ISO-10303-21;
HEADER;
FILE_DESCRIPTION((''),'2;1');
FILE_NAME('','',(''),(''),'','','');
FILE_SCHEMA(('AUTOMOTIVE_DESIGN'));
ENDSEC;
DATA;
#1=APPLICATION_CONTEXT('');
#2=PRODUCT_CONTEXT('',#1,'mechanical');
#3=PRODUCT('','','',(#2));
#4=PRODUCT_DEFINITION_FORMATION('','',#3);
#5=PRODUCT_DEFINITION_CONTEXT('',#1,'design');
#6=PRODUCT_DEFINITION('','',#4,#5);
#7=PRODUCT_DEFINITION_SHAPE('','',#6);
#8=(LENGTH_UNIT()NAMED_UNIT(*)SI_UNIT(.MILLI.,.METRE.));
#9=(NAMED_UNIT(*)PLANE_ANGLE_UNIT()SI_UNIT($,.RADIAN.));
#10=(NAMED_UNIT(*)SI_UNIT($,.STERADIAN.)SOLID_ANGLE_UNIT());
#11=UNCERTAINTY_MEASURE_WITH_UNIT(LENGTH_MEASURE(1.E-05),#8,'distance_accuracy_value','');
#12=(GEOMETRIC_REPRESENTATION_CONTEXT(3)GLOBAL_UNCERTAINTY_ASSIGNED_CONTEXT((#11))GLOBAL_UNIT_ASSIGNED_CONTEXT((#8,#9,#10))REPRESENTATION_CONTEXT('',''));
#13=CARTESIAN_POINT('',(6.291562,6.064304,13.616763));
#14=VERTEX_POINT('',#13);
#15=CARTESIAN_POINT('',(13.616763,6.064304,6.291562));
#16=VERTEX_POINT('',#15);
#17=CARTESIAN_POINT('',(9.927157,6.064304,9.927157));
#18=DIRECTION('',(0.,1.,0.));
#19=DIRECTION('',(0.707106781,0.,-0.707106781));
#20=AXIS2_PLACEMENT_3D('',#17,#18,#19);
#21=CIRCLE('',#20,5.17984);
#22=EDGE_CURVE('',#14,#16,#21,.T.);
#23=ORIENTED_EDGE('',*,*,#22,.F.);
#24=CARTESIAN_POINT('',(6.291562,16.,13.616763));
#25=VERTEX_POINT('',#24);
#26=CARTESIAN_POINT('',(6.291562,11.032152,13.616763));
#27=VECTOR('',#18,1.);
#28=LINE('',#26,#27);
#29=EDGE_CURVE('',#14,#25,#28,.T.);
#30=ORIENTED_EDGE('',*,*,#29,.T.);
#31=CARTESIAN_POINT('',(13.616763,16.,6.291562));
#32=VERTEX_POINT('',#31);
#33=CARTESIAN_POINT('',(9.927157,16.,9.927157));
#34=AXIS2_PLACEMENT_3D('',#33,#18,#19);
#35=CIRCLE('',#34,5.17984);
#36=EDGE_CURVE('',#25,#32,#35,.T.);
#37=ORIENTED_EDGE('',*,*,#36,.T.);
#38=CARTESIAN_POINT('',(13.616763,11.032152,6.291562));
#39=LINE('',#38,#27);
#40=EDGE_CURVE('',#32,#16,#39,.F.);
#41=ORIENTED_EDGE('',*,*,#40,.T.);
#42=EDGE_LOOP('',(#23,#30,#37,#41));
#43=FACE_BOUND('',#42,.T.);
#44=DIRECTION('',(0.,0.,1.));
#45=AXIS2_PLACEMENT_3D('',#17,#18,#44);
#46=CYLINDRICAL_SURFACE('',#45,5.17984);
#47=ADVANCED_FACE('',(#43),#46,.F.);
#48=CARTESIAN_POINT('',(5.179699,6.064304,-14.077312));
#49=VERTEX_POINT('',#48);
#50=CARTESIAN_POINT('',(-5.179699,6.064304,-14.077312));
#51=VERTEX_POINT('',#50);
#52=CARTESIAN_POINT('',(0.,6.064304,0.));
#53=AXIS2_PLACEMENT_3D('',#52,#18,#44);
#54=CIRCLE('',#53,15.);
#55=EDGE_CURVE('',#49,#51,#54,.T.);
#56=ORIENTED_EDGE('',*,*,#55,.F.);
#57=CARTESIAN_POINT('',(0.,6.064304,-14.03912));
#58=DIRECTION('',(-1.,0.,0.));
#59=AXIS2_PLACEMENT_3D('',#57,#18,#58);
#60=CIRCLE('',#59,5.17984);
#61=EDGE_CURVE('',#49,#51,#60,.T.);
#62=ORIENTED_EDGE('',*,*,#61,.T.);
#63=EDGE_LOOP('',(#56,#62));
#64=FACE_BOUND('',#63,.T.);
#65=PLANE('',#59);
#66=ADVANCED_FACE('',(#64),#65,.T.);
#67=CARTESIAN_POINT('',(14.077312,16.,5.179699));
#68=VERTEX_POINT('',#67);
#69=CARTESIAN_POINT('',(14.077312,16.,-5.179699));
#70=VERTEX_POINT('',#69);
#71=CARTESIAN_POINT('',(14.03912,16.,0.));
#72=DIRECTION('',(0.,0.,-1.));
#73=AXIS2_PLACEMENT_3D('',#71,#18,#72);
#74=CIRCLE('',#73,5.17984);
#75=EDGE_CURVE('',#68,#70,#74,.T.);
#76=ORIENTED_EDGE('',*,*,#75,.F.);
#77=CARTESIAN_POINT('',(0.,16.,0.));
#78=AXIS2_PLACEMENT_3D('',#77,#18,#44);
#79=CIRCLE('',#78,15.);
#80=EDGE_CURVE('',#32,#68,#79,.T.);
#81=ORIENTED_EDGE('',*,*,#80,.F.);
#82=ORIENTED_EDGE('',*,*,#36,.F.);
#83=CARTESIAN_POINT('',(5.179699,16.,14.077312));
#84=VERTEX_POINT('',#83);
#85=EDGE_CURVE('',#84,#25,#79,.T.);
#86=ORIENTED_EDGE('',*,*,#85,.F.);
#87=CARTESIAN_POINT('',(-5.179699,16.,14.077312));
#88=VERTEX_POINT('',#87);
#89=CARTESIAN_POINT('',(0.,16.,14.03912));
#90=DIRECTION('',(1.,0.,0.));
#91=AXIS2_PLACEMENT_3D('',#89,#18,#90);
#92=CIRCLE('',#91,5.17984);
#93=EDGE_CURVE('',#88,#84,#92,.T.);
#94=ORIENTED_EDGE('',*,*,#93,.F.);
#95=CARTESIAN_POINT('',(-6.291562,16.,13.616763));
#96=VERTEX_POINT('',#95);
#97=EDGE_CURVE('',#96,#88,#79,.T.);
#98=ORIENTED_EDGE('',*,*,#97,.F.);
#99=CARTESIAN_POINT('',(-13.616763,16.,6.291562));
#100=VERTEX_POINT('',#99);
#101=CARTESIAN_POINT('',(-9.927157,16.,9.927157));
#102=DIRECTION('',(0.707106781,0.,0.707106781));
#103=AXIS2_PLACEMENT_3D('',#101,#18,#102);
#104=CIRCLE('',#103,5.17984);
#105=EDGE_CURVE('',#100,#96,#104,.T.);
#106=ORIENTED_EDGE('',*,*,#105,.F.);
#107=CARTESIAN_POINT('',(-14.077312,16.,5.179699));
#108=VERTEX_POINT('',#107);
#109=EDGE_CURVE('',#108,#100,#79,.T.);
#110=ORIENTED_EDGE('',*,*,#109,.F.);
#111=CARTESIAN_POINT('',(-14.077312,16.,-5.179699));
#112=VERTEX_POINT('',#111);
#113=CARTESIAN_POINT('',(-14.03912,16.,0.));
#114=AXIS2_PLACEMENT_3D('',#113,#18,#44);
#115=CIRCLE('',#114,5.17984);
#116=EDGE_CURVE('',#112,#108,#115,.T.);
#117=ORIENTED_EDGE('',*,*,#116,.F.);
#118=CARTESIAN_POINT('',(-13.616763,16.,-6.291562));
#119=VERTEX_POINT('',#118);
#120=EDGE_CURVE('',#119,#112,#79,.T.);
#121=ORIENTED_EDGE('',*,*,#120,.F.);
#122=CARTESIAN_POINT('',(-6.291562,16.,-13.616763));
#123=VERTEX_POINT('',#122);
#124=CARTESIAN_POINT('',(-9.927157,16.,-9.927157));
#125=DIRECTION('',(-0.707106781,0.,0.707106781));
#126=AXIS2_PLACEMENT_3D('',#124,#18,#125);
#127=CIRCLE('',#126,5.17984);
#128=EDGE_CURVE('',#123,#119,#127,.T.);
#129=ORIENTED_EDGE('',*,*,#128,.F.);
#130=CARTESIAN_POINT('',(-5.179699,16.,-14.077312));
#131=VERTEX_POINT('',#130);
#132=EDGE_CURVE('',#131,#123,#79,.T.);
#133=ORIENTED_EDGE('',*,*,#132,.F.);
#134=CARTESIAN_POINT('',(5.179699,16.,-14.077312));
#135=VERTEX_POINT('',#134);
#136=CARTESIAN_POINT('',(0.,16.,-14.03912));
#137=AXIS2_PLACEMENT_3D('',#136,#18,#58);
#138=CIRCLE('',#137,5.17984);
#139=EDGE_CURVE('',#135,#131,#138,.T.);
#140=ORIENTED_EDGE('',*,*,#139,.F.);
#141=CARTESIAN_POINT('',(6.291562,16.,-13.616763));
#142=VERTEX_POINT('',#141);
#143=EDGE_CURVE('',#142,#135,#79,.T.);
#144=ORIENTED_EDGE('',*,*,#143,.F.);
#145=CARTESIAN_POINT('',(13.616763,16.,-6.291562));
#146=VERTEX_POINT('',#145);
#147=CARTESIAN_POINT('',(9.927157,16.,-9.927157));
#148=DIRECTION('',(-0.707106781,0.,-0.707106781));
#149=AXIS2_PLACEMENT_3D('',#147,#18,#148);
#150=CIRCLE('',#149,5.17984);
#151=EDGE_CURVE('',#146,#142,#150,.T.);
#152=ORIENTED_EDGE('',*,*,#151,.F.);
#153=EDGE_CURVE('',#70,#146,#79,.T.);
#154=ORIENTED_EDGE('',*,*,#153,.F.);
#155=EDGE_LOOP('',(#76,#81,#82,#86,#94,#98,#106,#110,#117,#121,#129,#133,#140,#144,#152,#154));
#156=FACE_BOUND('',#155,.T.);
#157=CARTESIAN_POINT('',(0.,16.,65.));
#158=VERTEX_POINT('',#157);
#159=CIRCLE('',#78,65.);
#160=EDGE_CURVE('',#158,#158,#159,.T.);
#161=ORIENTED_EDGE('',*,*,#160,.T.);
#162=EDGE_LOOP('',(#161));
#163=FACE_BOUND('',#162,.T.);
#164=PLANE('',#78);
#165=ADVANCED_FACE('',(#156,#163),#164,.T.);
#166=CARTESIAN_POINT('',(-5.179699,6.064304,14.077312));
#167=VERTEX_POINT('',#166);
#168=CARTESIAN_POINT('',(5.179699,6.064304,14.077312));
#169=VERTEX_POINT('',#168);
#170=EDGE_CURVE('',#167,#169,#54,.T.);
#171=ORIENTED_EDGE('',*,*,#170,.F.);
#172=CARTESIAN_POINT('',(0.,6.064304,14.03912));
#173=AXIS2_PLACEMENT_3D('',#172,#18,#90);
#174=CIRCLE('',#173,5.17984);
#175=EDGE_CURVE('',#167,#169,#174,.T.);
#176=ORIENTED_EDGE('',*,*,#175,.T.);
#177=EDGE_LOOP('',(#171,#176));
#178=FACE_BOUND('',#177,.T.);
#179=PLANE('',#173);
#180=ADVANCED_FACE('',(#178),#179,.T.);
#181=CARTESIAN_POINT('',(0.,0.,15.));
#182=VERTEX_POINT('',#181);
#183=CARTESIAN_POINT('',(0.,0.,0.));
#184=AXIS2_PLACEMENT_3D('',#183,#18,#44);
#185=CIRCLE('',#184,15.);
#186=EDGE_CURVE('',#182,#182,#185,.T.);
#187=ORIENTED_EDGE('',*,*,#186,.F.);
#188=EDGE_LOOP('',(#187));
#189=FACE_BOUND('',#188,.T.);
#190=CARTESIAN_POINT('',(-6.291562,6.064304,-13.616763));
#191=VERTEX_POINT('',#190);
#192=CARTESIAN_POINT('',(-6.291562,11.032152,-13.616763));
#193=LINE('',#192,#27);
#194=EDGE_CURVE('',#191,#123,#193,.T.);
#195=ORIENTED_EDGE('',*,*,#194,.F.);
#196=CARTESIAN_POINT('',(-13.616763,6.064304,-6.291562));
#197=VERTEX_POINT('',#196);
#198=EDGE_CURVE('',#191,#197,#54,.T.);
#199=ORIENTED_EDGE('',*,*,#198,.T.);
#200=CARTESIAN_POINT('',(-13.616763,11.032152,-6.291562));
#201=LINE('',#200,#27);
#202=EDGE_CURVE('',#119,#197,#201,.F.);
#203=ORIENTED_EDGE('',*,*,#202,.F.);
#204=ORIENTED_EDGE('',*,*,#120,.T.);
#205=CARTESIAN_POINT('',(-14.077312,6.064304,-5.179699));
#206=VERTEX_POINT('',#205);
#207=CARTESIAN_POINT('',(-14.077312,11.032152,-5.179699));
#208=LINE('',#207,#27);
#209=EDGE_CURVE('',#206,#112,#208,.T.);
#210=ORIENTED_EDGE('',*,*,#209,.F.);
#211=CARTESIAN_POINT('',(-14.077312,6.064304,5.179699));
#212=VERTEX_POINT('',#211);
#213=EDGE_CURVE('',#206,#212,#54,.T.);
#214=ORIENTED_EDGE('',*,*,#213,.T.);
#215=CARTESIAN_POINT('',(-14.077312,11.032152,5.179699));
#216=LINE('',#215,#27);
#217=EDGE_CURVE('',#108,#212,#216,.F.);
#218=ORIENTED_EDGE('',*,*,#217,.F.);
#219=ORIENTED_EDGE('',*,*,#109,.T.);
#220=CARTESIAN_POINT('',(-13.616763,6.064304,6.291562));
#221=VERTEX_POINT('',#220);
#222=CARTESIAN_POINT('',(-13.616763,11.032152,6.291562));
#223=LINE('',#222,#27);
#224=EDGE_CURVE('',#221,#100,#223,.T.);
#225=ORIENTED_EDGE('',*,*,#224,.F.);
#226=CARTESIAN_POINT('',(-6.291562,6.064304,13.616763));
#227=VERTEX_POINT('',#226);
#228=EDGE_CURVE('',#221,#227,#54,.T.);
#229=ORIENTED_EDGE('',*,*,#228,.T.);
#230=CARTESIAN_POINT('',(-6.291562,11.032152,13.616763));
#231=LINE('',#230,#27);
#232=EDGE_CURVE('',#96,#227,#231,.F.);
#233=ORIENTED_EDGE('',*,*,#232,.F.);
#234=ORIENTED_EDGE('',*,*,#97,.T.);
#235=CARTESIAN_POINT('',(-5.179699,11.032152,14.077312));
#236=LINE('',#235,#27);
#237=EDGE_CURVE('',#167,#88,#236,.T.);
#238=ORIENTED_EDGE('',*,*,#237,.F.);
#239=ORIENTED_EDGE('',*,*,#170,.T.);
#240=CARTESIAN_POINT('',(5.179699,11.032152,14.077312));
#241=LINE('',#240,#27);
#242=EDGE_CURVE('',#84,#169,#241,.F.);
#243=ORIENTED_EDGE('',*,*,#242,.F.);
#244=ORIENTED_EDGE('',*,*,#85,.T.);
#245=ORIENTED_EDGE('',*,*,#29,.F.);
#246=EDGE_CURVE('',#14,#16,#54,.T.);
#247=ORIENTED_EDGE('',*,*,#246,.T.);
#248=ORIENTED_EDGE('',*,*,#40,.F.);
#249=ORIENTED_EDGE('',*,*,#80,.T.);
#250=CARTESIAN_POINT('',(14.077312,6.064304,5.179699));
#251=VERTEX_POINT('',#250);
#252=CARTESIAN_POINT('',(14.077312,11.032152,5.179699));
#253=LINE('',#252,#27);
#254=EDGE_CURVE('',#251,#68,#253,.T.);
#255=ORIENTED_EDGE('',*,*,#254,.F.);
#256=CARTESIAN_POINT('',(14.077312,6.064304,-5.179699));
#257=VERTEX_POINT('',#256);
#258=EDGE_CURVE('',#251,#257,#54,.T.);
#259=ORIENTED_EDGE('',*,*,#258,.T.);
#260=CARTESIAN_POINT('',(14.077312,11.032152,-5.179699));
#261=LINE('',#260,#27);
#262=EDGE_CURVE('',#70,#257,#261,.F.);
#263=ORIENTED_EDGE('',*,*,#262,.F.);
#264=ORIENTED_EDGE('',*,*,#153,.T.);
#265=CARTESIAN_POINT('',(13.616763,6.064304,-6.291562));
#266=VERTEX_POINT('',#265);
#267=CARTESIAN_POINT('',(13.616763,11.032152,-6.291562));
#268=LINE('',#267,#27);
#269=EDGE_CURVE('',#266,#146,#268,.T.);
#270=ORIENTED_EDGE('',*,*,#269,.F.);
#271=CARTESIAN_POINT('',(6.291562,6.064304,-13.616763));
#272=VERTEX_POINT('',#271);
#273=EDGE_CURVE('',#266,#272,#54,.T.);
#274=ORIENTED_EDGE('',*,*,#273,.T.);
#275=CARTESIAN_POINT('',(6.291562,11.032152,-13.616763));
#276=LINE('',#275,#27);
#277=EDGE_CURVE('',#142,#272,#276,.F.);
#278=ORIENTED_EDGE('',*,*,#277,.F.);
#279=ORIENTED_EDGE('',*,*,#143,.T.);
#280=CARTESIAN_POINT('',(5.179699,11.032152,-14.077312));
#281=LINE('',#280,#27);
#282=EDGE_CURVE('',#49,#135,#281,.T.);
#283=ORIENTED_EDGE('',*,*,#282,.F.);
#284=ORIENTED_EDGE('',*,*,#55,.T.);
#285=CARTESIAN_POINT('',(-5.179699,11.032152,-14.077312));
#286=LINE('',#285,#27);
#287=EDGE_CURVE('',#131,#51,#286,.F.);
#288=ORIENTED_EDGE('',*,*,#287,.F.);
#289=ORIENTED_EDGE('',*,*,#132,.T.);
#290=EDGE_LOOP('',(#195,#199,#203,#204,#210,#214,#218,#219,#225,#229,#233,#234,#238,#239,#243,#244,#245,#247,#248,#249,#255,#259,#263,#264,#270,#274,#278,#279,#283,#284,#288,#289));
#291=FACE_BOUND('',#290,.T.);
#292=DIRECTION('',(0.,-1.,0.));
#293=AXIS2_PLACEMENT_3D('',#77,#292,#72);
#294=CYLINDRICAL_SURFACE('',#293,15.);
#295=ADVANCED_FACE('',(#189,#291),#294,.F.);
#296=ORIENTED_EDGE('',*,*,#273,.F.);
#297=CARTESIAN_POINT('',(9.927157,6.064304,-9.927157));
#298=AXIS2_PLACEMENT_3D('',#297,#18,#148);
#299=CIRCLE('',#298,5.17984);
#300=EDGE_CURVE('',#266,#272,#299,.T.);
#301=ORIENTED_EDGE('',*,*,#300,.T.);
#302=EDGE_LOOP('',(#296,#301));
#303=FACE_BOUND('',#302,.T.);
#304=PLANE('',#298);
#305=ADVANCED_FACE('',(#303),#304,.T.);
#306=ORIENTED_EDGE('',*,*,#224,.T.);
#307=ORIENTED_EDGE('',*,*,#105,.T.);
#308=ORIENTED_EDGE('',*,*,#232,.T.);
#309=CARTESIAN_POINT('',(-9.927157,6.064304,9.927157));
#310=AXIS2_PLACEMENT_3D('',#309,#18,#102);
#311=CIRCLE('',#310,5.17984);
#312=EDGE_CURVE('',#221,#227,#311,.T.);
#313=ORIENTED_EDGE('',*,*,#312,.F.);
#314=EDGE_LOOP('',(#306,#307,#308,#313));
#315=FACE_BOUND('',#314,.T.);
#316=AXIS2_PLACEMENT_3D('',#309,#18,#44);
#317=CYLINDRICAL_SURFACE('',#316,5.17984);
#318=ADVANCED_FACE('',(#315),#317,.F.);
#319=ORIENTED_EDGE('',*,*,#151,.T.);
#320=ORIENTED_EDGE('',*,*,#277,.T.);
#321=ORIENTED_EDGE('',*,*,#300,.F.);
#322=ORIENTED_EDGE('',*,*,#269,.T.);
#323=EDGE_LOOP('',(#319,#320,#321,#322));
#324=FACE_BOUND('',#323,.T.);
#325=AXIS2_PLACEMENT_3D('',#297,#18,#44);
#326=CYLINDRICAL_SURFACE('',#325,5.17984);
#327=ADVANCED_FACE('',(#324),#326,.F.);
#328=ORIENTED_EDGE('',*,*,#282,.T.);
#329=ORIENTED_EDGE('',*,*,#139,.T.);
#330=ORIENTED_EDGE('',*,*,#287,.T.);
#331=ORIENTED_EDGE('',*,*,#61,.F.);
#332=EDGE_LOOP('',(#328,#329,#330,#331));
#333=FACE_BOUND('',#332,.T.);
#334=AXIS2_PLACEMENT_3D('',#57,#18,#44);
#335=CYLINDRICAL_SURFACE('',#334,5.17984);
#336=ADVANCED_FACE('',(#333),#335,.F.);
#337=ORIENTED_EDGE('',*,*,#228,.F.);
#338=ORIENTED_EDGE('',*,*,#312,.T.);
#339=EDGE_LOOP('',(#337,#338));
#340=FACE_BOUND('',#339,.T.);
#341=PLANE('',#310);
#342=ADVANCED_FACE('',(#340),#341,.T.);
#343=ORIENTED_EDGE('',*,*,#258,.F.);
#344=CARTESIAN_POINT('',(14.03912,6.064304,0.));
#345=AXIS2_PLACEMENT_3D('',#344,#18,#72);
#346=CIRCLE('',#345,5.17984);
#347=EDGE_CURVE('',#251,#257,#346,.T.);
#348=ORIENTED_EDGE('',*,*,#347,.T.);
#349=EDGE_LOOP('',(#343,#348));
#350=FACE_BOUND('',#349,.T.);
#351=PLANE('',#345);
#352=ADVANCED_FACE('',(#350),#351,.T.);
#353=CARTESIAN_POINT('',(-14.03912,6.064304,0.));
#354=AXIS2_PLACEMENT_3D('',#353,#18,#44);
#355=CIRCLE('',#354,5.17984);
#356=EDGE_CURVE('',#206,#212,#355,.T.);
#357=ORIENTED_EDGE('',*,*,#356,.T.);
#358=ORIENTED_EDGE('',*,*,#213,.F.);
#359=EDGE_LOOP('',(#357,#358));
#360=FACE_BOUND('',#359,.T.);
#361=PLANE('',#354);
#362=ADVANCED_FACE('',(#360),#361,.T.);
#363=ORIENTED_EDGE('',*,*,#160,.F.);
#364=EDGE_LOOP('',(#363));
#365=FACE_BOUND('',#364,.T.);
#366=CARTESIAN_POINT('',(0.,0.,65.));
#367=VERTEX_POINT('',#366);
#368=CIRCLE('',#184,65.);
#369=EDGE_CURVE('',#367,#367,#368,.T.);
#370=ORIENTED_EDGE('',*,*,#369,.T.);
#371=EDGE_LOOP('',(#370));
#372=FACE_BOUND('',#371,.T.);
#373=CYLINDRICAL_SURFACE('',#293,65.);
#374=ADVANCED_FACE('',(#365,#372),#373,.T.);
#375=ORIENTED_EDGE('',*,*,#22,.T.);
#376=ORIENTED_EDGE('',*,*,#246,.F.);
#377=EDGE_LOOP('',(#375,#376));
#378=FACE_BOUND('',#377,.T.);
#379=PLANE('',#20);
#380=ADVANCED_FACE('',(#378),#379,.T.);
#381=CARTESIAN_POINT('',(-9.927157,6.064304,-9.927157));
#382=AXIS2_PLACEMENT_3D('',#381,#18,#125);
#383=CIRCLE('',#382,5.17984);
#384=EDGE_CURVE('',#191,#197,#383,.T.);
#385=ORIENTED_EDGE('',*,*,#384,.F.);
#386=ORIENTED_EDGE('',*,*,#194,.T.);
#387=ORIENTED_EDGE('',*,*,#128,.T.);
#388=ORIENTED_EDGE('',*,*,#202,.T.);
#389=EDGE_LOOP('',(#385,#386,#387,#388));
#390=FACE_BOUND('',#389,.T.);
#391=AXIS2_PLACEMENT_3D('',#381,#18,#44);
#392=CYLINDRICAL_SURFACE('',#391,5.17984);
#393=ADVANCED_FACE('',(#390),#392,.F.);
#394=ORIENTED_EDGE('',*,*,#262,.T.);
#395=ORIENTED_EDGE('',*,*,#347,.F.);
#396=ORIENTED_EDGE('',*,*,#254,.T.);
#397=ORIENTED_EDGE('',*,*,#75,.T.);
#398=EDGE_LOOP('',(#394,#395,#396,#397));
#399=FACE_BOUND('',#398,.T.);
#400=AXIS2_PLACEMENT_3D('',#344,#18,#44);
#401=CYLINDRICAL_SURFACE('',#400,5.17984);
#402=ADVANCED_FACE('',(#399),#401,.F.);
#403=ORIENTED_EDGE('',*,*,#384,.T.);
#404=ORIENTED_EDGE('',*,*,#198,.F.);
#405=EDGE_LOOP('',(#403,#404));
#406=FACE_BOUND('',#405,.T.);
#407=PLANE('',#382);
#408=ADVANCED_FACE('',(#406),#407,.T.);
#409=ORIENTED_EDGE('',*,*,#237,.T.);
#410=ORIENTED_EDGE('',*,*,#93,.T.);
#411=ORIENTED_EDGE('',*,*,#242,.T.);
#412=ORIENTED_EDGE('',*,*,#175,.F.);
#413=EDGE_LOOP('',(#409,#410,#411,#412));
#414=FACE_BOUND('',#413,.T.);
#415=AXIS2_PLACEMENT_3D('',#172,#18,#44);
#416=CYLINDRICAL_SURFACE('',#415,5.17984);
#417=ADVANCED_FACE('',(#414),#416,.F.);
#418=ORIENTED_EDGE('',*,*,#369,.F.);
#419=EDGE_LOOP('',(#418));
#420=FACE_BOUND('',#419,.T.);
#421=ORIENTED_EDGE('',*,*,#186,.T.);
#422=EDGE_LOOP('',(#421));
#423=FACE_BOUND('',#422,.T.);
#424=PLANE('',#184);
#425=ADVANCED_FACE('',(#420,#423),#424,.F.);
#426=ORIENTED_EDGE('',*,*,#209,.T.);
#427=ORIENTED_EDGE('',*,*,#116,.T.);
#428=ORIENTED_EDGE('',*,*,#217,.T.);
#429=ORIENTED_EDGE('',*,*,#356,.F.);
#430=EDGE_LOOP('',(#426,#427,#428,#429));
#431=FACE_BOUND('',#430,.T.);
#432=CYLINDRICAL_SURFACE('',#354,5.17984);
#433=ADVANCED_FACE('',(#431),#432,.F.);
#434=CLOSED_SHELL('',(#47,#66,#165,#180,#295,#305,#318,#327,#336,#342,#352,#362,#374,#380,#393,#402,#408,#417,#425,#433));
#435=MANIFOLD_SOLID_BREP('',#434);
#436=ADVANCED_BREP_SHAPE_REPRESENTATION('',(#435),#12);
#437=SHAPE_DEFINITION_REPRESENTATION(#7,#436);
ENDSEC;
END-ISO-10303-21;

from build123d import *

# Parameters (mm, degrees)
SKETCH1_R           = 65
BOSS_EXTRUDE1_DEPTH = 16
SKETCH2_R           = 15
CUT_EXTRUDE1_DEPTH  = 94.305948363
SKETCH3_R           = 5.179840069
CUT_EXTRUDE2_DEPTH  = 9.935696136
CIRPATTERN1_COUNT   = 8


with BuildPart() as part:
    # Sketch1 → Boss-Extrude1 (new body)
    with BuildSketch(Plane(origin=(0, 0, 0), x_dir=(1, 0, 0), z_dir=(0, 1, 0))):
        Circle(SKETCH1_R)
    extrude(amount=BOSS_EXTRUDE1_DEPTH)

    # Sketch2 → Cut-Extrude1 (cut, through all)
    with BuildSketch(Plane(origin=(0, 0, 0), x_dir=(1, 0, 0), z_dir=(0, 1, 0))):
        Circle(SKETCH2_R)
    extrude(amount=CUT_EXTRUDE1_DEPTH, mode=Mode.SUBTRACT)

    # Sketch3 → Cut-Extrude2 (cut)
    with BuildSketch(Plane(origin=(0, 16, 0), x_dir=(1, 0, 0), z_dir=(0, 1, 0))):
        with Locations((-14.039119556, 0)):
            Circle(SKETCH3_R)
    cut_extrude2 = extrude(amount=-CUT_EXTRUDE2_DEPTH, mode=Mode.SUBTRACT)

    # CirPattern1: Cut-Extrude2 ×8 about axis
    cirpattern1_axis = Axis((0, 0, 0), (0, 1, 0))
    for i in range(1, CIRPATTERN1_COUNT):
        add(cut_extrude2.rotate(cirpattern1_axis, i * 360 / CIRPATTERN1_COUNT), mode=Mode.SUBTRACT)


solid = part.part
